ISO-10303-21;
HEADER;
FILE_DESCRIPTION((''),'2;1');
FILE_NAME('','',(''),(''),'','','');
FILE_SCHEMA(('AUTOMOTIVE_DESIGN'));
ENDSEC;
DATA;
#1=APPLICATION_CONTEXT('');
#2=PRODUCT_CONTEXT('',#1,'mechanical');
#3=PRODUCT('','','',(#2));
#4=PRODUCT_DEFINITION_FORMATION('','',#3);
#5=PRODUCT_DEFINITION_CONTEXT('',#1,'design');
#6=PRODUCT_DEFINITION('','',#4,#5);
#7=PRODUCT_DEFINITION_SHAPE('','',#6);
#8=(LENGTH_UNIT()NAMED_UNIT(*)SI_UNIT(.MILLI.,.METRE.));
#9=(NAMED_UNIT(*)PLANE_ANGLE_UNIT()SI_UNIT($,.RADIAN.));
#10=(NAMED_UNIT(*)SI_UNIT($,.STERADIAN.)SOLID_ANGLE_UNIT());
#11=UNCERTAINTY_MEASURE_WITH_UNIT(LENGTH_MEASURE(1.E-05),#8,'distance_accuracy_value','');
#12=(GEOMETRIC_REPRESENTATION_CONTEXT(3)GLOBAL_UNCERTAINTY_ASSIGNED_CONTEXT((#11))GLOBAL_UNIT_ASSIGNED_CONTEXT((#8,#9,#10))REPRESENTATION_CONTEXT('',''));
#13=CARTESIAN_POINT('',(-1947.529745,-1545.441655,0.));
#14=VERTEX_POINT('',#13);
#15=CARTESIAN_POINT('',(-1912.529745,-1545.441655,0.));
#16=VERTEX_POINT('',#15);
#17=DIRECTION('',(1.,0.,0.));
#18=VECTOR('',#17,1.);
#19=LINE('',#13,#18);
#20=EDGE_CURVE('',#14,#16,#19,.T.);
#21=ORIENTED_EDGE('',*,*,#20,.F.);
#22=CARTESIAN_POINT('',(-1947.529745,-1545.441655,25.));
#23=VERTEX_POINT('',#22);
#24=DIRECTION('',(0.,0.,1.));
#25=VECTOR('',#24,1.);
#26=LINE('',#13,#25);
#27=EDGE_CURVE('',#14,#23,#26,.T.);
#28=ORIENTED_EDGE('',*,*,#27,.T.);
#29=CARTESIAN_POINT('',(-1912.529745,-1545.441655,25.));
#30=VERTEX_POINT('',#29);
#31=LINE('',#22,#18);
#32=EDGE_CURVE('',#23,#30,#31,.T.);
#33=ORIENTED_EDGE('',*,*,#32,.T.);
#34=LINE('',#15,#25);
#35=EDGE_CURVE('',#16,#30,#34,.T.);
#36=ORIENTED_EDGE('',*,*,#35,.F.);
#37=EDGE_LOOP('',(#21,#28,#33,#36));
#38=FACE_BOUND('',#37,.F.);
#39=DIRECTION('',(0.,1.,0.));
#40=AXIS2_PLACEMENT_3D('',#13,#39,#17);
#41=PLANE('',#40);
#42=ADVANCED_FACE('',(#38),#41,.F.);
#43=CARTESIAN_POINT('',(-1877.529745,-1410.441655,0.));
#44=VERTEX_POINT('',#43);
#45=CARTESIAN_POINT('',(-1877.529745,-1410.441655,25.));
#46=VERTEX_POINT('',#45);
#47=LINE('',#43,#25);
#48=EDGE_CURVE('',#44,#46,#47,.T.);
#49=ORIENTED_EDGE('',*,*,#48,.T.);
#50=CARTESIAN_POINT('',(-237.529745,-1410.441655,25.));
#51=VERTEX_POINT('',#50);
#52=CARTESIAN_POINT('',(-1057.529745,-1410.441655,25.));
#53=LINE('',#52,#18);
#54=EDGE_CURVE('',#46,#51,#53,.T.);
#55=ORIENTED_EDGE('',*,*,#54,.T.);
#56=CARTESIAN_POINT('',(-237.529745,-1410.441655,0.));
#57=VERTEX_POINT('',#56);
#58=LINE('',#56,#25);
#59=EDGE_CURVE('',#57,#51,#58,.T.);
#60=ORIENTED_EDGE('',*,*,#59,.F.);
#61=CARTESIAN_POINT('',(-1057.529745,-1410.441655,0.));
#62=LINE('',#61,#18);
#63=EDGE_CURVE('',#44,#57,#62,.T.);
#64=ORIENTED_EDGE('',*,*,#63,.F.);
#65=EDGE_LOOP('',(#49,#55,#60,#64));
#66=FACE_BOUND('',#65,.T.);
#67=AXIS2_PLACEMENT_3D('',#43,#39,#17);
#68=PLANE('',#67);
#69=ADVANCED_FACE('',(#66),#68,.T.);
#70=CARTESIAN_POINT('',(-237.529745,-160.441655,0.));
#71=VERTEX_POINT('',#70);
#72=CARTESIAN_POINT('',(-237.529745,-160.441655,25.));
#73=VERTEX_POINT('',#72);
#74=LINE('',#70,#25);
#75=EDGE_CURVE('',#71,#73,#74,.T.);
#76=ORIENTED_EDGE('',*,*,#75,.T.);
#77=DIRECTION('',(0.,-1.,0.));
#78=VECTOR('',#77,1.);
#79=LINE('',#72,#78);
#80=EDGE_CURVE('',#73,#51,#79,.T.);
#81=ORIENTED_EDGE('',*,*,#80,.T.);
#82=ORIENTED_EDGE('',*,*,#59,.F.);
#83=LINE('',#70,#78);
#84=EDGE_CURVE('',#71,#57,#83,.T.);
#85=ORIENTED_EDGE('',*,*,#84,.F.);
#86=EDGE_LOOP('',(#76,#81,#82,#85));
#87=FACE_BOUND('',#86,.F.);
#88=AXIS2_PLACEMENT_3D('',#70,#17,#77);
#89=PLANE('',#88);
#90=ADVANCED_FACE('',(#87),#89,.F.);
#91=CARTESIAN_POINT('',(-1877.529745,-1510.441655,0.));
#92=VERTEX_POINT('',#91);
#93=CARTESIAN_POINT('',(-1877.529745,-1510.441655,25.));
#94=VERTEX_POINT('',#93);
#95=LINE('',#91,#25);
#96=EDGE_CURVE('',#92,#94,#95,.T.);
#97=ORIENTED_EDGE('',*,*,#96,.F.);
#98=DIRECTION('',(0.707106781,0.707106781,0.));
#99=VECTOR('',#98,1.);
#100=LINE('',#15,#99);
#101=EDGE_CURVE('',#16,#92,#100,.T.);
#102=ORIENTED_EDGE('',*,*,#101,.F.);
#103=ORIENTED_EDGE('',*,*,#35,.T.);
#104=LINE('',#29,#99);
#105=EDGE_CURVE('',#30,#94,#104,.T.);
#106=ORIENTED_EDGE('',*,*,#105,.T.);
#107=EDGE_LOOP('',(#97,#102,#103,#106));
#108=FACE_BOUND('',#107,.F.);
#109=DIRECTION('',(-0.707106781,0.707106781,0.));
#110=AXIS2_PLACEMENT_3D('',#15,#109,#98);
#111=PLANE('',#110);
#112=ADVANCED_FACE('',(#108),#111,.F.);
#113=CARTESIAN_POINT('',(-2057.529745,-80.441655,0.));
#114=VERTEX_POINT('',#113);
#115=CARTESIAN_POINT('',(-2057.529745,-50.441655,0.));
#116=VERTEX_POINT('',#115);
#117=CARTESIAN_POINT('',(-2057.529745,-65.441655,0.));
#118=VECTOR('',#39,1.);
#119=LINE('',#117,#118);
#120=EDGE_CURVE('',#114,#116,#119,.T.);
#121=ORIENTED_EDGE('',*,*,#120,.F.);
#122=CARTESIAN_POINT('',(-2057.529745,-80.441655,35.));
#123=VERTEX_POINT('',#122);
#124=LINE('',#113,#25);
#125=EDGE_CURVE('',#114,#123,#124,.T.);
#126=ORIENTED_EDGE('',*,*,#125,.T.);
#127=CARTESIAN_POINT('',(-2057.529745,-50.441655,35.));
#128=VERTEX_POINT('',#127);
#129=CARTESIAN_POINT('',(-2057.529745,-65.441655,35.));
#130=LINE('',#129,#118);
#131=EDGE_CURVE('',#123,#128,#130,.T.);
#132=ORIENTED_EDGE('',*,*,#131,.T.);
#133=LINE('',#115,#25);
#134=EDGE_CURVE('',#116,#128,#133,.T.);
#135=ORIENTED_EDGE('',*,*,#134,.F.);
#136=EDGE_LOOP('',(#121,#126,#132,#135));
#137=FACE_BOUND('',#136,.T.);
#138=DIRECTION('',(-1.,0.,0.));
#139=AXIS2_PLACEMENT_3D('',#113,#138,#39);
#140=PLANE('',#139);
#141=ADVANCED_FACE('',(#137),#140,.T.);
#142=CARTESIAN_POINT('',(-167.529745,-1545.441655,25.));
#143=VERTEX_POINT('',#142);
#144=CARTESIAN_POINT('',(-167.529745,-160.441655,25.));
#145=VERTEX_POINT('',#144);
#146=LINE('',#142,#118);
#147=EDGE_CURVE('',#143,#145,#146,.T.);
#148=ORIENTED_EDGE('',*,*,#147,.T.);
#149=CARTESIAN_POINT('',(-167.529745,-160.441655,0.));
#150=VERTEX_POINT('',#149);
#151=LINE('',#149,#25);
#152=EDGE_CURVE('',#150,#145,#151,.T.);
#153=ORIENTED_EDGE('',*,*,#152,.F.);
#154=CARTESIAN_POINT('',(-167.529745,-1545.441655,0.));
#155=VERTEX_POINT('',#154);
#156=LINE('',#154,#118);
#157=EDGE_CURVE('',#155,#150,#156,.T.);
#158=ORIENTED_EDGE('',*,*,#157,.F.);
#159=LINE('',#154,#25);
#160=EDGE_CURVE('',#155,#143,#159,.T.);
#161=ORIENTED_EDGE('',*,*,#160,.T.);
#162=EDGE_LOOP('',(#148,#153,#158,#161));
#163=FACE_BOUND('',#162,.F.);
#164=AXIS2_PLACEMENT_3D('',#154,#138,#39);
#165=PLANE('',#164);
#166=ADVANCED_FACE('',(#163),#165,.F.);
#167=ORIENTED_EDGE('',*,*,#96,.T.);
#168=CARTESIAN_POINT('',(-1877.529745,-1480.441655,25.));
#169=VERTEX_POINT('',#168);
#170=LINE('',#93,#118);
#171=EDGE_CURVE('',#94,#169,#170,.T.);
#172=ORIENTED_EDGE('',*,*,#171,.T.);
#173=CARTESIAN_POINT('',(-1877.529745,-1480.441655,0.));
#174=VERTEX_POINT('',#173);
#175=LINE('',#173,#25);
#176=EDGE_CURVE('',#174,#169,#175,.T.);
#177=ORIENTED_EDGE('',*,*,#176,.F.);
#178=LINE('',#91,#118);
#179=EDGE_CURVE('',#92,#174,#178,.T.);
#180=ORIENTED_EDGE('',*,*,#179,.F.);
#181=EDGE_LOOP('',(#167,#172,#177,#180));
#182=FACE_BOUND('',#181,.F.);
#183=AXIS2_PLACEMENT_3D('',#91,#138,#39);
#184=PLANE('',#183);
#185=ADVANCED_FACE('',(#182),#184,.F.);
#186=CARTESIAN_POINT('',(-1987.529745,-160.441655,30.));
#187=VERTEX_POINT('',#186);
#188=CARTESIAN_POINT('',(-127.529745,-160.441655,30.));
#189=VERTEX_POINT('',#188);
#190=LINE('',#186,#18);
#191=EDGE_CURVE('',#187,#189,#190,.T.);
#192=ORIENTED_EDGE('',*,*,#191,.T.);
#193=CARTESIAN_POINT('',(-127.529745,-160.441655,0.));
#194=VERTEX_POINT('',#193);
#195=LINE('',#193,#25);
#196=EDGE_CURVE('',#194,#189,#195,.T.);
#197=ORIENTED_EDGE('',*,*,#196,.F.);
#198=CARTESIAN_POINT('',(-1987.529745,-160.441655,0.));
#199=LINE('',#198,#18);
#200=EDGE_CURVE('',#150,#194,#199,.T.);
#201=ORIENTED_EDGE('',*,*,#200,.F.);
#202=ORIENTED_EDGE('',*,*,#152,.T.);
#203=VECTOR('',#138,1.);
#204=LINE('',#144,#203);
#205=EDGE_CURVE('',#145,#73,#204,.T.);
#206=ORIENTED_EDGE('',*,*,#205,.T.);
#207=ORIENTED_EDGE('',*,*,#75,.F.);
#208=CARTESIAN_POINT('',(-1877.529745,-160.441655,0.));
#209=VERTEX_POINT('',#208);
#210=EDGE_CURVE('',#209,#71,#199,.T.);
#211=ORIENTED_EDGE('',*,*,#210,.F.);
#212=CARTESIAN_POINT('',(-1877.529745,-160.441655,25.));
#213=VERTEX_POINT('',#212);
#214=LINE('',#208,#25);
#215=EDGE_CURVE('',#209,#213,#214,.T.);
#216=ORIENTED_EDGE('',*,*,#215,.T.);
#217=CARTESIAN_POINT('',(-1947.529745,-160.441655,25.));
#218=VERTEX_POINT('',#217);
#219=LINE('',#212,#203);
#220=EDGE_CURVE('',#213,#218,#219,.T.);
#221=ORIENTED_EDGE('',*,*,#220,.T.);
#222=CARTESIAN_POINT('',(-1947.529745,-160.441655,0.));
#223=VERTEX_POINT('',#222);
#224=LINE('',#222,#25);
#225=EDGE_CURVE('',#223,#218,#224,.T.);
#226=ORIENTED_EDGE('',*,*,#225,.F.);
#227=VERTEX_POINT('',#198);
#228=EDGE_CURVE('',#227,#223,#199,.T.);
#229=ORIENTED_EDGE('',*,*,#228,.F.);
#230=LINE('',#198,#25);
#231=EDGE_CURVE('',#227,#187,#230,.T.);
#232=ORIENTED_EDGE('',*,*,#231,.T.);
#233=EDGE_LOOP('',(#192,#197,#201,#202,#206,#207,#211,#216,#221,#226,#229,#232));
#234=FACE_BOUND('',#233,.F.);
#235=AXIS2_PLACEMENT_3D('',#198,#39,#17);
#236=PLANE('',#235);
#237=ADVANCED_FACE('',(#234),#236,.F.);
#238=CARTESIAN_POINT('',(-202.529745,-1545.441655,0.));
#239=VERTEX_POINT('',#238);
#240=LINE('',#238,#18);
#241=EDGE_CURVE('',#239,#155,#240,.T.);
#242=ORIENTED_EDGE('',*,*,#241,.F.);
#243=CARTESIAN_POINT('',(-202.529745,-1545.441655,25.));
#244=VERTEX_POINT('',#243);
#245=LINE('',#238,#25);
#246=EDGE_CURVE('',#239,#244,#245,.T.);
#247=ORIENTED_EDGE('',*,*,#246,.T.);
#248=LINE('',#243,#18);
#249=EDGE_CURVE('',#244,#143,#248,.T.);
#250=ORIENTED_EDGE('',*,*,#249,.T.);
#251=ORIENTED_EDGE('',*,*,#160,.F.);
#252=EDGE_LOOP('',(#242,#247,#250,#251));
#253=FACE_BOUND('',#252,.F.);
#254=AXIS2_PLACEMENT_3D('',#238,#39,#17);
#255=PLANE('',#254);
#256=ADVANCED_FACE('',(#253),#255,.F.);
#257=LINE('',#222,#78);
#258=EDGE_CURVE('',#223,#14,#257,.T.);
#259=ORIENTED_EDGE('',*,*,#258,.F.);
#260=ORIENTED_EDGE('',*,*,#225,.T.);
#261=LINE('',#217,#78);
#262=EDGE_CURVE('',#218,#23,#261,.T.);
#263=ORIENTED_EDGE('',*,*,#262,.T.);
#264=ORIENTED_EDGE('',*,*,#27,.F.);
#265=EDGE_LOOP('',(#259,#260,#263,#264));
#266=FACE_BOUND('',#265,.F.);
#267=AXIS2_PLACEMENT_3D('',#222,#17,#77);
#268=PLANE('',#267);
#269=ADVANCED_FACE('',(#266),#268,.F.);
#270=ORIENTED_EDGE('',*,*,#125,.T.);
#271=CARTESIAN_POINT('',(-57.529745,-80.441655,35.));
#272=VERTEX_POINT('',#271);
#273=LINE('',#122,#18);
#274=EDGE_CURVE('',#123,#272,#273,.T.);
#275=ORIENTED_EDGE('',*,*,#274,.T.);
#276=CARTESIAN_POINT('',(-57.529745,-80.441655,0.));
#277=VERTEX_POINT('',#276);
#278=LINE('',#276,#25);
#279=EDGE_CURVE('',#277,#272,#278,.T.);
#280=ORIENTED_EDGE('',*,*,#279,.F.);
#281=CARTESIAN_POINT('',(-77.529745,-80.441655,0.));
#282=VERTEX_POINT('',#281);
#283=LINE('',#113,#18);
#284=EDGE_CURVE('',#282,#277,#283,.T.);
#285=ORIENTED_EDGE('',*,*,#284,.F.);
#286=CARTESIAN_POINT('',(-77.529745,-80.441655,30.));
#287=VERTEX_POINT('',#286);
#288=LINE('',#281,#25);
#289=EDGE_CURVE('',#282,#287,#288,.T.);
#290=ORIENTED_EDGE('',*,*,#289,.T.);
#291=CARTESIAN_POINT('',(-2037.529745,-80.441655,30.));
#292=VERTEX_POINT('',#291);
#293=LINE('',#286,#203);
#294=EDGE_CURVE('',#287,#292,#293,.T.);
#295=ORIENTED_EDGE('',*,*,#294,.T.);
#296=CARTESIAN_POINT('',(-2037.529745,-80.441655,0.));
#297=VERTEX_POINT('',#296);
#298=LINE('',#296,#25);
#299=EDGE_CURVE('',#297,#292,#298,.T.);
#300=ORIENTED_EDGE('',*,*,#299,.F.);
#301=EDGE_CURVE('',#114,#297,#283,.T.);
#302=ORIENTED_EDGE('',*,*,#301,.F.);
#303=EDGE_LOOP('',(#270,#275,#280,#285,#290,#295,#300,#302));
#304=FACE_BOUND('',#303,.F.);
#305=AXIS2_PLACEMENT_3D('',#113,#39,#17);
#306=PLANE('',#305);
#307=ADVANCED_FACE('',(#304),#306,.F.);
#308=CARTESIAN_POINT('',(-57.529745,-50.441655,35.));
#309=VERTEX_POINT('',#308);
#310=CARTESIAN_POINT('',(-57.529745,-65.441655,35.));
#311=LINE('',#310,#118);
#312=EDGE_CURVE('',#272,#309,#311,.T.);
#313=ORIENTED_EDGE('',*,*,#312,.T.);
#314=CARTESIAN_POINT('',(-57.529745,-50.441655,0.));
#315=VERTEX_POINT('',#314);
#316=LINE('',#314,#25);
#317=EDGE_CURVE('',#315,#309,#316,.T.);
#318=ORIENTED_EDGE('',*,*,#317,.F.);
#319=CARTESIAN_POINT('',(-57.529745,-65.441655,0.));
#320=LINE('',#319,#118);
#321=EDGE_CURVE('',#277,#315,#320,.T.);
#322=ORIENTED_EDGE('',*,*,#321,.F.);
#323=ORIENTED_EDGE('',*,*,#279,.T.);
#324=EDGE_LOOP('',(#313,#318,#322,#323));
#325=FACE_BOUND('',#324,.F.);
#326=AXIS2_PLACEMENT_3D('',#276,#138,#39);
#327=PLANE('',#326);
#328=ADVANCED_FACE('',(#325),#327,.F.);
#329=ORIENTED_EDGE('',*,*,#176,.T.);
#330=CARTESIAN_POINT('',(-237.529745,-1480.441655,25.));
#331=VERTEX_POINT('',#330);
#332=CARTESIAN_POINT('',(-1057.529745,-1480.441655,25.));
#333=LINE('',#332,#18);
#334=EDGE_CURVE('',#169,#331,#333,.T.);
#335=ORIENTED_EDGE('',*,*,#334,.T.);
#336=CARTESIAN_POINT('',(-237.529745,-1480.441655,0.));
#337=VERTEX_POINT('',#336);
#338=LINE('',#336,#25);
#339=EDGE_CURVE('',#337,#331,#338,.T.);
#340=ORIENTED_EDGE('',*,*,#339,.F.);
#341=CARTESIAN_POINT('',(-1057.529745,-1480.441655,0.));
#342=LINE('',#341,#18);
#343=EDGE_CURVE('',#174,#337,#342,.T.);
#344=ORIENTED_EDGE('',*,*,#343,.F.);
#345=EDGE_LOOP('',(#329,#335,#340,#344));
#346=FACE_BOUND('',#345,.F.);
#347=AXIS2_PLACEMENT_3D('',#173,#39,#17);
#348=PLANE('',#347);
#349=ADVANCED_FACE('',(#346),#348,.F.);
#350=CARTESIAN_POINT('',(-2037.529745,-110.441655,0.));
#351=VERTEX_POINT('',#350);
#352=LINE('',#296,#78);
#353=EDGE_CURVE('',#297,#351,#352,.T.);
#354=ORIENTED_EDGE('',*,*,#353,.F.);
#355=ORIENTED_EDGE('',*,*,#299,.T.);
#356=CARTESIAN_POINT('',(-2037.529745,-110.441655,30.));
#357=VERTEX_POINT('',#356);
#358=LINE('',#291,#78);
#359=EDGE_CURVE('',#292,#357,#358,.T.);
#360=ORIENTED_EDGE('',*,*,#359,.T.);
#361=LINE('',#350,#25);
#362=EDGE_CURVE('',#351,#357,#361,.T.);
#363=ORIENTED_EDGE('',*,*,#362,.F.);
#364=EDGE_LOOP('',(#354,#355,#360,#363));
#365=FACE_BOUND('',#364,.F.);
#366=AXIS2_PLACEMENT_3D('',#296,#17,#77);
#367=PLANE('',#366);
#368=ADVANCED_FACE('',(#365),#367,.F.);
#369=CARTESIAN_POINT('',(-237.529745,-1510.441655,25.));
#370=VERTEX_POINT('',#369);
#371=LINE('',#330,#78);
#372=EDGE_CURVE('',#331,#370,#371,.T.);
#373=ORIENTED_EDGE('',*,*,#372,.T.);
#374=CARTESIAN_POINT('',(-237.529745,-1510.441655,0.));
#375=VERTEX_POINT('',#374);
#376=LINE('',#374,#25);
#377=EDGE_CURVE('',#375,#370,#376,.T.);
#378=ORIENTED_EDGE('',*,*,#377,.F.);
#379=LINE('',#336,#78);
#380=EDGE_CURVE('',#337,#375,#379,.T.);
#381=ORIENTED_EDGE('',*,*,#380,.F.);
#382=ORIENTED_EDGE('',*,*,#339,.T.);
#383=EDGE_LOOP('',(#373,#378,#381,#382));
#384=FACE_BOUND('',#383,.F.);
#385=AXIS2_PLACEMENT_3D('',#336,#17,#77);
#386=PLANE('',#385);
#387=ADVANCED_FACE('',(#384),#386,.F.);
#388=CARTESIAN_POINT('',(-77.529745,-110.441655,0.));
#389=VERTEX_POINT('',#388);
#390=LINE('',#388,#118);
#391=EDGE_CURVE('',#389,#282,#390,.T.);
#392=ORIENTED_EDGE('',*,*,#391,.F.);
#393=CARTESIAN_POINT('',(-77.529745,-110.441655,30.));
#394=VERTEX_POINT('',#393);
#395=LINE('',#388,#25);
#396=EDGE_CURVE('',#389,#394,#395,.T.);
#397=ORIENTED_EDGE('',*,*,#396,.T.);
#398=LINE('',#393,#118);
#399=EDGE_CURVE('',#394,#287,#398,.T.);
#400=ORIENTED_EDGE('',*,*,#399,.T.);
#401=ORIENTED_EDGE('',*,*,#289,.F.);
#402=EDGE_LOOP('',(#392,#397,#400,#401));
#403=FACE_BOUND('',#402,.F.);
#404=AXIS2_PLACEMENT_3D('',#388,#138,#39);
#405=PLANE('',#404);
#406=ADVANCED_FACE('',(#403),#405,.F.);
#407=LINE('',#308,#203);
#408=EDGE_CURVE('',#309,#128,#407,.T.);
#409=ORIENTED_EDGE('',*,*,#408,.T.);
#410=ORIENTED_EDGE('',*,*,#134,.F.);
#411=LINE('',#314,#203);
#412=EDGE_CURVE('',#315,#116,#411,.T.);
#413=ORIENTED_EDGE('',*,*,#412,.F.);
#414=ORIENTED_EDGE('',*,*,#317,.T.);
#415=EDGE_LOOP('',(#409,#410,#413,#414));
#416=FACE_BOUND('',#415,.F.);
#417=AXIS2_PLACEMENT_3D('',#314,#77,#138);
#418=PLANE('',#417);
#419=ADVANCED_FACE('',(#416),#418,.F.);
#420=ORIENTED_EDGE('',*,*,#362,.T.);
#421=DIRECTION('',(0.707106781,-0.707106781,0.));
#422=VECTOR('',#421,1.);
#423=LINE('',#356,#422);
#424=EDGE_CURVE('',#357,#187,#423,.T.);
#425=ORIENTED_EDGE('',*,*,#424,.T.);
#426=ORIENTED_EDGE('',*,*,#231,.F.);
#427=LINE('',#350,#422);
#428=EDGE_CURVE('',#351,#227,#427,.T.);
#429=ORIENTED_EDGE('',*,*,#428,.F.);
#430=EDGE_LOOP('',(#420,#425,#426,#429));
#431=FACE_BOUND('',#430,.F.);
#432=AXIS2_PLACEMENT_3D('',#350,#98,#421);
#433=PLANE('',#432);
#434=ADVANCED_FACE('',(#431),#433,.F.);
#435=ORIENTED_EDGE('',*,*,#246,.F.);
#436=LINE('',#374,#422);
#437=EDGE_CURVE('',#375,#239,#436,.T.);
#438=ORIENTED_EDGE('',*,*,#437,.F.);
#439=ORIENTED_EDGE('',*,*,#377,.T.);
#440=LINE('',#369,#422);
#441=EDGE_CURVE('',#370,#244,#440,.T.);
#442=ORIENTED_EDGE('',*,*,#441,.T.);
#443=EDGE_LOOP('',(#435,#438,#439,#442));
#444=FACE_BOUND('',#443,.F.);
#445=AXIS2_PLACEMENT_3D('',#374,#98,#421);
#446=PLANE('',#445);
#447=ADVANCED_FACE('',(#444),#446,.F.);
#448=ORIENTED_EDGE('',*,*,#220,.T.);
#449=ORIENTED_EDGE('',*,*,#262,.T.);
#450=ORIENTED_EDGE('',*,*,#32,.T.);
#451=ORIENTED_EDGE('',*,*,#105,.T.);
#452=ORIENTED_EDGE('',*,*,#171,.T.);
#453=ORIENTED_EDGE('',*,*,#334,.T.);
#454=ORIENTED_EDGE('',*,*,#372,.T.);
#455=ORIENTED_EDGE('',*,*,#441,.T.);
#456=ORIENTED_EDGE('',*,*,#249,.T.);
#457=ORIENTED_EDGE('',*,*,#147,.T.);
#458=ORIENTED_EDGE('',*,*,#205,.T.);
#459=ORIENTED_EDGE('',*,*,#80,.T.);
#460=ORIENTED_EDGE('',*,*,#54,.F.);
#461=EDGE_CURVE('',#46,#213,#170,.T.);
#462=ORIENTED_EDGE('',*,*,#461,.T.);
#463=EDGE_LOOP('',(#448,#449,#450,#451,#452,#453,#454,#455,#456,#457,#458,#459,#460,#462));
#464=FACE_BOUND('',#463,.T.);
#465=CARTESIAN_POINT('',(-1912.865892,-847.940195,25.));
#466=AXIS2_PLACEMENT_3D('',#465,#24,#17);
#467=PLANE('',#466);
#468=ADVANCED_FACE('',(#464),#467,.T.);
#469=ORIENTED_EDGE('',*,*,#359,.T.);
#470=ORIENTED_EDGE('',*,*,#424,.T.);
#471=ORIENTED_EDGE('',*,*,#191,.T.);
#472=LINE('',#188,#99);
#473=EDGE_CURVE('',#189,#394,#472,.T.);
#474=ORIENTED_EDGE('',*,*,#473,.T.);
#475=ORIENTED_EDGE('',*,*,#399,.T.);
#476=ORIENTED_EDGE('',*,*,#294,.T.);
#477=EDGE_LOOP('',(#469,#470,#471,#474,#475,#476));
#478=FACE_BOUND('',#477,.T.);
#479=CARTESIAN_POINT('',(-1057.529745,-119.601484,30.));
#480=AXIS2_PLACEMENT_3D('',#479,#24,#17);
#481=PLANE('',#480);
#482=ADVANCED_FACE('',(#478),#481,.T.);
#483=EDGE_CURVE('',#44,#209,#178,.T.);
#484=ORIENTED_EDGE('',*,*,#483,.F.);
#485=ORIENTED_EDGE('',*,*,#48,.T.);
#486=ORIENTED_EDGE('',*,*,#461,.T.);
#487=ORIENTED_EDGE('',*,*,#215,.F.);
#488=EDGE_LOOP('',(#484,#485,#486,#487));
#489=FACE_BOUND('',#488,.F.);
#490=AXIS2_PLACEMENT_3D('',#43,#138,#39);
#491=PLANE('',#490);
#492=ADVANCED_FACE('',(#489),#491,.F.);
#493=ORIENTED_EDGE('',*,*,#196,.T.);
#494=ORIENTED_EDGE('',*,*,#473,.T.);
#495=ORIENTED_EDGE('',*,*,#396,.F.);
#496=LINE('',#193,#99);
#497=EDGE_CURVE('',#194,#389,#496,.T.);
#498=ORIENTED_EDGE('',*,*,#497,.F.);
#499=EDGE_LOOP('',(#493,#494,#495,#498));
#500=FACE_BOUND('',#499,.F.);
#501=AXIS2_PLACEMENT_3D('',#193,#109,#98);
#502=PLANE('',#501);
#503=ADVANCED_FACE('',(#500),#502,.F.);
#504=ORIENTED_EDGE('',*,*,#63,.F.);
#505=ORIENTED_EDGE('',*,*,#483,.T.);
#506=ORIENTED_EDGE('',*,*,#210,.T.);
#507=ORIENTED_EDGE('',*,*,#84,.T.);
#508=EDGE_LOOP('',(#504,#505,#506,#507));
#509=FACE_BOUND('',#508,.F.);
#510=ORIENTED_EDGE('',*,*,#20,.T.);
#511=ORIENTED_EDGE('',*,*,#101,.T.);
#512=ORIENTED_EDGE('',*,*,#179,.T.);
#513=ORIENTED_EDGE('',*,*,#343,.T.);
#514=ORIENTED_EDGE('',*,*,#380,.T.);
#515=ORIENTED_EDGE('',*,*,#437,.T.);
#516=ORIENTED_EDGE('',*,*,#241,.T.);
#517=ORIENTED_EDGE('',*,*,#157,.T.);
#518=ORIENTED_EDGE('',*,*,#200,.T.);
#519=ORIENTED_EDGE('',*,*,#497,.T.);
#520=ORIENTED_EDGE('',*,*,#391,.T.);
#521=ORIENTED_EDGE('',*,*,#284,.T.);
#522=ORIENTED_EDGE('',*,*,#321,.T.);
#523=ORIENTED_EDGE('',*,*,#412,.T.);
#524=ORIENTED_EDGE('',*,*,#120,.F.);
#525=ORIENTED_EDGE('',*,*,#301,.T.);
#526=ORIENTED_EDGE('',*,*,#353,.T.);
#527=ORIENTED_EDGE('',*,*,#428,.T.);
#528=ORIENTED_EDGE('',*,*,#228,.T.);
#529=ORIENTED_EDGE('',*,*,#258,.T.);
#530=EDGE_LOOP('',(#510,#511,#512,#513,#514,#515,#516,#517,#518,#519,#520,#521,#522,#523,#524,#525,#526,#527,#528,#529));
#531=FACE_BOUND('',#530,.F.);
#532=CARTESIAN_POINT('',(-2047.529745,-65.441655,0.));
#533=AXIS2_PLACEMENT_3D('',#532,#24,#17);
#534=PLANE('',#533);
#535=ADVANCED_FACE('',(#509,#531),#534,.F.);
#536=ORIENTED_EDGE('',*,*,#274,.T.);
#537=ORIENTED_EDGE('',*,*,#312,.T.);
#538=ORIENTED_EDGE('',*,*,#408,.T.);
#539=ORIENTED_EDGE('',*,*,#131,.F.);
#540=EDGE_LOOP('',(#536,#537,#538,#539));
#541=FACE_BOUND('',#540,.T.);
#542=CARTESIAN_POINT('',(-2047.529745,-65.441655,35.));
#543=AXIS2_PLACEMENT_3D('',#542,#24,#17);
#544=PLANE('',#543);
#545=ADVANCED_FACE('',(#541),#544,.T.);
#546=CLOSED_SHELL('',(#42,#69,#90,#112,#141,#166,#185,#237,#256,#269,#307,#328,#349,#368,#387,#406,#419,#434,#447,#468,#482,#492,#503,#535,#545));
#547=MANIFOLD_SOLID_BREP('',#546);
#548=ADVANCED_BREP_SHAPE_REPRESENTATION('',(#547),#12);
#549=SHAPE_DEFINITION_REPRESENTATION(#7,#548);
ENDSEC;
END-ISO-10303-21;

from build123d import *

# Parameters (mm, degrees)
F1_DEPTH = 30
F0_W     = 20
F0_H     = 30
F0_W_2   = 1960
F2_DEPTH = 35
F0_W_3   = 1640
F0_H_2   = 70
F3_DEPTH = 25


with BuildPart() as f1:
    # F0 (on Top) → F1 (new body)
    with BuildSketch(Plane.XY):
        Polygon((-1947.5297451019, -160.4416549206), (-1877.5297451019, -160.4416549206), (-237.5297451019, -160.4416549206), (-167.5297451019, -160.4416549206), (-127.5297451019, -160.4416549206), (-77.5297451019, -110.4416549206), (-77.5297451019, -80.4416549206), (-2037.5297451019, -80.4416549206), (-2037.5297451019, -110.4416549206), (-1987.5297451019, -160.4416549206), align=None)
    extrude(amount=F1_DEPTH)

    # F0 (on Top) → F2 (join)
    with BuildSketch(Plane.XY):
        with Locations((-2047.5297451019, -65.4416549206)):
            Rectangle(F0_W, F0_H)
        with Locations((-1057.5297451019, -65.4416549206)):
            Rectangle(F0_W_2, F0_H)
        with Locations((-67.5297451019, -65.4416549206)):
            Rectangle(F0_W, F0_H)
    extrude(amount=F2_DEPTH)

    # F0 (on Top) → F3 (join)
    with BuildSketch(Plane.XY):
        Polygon((-1877.5297451019, -1410.4416549206), (-1877.5297451019, -160.4416549206), (-1947.5297451019, -160.4416549206), (-1947.5297451019, -1545.4416549206), (-1912.5297451019, -1545.4416549206), (-1877.5297451019, -1510.4416549206), (-1877.5297451019, -1480.4416549206), align=None)
        with Locations((-1057.5297451019, -1445.4416549206)):
            Rectangle(F0_W_3, F0_H_2)
        Polygon((-167.5297451019, -160.4416549206), (-237.5297451019, -160.4416549206), (-237.5297451019, -1410.4416549206), (-237.5297451019, -1480.4416549206), (-237.5297451019, -1510.4416549206), (-202.5297451019, -1545.4416549206), (-167.5297451019, -1545.4416549206), align=None)
    extrude(amount=F3_DEPTH)


solid = f1.part
